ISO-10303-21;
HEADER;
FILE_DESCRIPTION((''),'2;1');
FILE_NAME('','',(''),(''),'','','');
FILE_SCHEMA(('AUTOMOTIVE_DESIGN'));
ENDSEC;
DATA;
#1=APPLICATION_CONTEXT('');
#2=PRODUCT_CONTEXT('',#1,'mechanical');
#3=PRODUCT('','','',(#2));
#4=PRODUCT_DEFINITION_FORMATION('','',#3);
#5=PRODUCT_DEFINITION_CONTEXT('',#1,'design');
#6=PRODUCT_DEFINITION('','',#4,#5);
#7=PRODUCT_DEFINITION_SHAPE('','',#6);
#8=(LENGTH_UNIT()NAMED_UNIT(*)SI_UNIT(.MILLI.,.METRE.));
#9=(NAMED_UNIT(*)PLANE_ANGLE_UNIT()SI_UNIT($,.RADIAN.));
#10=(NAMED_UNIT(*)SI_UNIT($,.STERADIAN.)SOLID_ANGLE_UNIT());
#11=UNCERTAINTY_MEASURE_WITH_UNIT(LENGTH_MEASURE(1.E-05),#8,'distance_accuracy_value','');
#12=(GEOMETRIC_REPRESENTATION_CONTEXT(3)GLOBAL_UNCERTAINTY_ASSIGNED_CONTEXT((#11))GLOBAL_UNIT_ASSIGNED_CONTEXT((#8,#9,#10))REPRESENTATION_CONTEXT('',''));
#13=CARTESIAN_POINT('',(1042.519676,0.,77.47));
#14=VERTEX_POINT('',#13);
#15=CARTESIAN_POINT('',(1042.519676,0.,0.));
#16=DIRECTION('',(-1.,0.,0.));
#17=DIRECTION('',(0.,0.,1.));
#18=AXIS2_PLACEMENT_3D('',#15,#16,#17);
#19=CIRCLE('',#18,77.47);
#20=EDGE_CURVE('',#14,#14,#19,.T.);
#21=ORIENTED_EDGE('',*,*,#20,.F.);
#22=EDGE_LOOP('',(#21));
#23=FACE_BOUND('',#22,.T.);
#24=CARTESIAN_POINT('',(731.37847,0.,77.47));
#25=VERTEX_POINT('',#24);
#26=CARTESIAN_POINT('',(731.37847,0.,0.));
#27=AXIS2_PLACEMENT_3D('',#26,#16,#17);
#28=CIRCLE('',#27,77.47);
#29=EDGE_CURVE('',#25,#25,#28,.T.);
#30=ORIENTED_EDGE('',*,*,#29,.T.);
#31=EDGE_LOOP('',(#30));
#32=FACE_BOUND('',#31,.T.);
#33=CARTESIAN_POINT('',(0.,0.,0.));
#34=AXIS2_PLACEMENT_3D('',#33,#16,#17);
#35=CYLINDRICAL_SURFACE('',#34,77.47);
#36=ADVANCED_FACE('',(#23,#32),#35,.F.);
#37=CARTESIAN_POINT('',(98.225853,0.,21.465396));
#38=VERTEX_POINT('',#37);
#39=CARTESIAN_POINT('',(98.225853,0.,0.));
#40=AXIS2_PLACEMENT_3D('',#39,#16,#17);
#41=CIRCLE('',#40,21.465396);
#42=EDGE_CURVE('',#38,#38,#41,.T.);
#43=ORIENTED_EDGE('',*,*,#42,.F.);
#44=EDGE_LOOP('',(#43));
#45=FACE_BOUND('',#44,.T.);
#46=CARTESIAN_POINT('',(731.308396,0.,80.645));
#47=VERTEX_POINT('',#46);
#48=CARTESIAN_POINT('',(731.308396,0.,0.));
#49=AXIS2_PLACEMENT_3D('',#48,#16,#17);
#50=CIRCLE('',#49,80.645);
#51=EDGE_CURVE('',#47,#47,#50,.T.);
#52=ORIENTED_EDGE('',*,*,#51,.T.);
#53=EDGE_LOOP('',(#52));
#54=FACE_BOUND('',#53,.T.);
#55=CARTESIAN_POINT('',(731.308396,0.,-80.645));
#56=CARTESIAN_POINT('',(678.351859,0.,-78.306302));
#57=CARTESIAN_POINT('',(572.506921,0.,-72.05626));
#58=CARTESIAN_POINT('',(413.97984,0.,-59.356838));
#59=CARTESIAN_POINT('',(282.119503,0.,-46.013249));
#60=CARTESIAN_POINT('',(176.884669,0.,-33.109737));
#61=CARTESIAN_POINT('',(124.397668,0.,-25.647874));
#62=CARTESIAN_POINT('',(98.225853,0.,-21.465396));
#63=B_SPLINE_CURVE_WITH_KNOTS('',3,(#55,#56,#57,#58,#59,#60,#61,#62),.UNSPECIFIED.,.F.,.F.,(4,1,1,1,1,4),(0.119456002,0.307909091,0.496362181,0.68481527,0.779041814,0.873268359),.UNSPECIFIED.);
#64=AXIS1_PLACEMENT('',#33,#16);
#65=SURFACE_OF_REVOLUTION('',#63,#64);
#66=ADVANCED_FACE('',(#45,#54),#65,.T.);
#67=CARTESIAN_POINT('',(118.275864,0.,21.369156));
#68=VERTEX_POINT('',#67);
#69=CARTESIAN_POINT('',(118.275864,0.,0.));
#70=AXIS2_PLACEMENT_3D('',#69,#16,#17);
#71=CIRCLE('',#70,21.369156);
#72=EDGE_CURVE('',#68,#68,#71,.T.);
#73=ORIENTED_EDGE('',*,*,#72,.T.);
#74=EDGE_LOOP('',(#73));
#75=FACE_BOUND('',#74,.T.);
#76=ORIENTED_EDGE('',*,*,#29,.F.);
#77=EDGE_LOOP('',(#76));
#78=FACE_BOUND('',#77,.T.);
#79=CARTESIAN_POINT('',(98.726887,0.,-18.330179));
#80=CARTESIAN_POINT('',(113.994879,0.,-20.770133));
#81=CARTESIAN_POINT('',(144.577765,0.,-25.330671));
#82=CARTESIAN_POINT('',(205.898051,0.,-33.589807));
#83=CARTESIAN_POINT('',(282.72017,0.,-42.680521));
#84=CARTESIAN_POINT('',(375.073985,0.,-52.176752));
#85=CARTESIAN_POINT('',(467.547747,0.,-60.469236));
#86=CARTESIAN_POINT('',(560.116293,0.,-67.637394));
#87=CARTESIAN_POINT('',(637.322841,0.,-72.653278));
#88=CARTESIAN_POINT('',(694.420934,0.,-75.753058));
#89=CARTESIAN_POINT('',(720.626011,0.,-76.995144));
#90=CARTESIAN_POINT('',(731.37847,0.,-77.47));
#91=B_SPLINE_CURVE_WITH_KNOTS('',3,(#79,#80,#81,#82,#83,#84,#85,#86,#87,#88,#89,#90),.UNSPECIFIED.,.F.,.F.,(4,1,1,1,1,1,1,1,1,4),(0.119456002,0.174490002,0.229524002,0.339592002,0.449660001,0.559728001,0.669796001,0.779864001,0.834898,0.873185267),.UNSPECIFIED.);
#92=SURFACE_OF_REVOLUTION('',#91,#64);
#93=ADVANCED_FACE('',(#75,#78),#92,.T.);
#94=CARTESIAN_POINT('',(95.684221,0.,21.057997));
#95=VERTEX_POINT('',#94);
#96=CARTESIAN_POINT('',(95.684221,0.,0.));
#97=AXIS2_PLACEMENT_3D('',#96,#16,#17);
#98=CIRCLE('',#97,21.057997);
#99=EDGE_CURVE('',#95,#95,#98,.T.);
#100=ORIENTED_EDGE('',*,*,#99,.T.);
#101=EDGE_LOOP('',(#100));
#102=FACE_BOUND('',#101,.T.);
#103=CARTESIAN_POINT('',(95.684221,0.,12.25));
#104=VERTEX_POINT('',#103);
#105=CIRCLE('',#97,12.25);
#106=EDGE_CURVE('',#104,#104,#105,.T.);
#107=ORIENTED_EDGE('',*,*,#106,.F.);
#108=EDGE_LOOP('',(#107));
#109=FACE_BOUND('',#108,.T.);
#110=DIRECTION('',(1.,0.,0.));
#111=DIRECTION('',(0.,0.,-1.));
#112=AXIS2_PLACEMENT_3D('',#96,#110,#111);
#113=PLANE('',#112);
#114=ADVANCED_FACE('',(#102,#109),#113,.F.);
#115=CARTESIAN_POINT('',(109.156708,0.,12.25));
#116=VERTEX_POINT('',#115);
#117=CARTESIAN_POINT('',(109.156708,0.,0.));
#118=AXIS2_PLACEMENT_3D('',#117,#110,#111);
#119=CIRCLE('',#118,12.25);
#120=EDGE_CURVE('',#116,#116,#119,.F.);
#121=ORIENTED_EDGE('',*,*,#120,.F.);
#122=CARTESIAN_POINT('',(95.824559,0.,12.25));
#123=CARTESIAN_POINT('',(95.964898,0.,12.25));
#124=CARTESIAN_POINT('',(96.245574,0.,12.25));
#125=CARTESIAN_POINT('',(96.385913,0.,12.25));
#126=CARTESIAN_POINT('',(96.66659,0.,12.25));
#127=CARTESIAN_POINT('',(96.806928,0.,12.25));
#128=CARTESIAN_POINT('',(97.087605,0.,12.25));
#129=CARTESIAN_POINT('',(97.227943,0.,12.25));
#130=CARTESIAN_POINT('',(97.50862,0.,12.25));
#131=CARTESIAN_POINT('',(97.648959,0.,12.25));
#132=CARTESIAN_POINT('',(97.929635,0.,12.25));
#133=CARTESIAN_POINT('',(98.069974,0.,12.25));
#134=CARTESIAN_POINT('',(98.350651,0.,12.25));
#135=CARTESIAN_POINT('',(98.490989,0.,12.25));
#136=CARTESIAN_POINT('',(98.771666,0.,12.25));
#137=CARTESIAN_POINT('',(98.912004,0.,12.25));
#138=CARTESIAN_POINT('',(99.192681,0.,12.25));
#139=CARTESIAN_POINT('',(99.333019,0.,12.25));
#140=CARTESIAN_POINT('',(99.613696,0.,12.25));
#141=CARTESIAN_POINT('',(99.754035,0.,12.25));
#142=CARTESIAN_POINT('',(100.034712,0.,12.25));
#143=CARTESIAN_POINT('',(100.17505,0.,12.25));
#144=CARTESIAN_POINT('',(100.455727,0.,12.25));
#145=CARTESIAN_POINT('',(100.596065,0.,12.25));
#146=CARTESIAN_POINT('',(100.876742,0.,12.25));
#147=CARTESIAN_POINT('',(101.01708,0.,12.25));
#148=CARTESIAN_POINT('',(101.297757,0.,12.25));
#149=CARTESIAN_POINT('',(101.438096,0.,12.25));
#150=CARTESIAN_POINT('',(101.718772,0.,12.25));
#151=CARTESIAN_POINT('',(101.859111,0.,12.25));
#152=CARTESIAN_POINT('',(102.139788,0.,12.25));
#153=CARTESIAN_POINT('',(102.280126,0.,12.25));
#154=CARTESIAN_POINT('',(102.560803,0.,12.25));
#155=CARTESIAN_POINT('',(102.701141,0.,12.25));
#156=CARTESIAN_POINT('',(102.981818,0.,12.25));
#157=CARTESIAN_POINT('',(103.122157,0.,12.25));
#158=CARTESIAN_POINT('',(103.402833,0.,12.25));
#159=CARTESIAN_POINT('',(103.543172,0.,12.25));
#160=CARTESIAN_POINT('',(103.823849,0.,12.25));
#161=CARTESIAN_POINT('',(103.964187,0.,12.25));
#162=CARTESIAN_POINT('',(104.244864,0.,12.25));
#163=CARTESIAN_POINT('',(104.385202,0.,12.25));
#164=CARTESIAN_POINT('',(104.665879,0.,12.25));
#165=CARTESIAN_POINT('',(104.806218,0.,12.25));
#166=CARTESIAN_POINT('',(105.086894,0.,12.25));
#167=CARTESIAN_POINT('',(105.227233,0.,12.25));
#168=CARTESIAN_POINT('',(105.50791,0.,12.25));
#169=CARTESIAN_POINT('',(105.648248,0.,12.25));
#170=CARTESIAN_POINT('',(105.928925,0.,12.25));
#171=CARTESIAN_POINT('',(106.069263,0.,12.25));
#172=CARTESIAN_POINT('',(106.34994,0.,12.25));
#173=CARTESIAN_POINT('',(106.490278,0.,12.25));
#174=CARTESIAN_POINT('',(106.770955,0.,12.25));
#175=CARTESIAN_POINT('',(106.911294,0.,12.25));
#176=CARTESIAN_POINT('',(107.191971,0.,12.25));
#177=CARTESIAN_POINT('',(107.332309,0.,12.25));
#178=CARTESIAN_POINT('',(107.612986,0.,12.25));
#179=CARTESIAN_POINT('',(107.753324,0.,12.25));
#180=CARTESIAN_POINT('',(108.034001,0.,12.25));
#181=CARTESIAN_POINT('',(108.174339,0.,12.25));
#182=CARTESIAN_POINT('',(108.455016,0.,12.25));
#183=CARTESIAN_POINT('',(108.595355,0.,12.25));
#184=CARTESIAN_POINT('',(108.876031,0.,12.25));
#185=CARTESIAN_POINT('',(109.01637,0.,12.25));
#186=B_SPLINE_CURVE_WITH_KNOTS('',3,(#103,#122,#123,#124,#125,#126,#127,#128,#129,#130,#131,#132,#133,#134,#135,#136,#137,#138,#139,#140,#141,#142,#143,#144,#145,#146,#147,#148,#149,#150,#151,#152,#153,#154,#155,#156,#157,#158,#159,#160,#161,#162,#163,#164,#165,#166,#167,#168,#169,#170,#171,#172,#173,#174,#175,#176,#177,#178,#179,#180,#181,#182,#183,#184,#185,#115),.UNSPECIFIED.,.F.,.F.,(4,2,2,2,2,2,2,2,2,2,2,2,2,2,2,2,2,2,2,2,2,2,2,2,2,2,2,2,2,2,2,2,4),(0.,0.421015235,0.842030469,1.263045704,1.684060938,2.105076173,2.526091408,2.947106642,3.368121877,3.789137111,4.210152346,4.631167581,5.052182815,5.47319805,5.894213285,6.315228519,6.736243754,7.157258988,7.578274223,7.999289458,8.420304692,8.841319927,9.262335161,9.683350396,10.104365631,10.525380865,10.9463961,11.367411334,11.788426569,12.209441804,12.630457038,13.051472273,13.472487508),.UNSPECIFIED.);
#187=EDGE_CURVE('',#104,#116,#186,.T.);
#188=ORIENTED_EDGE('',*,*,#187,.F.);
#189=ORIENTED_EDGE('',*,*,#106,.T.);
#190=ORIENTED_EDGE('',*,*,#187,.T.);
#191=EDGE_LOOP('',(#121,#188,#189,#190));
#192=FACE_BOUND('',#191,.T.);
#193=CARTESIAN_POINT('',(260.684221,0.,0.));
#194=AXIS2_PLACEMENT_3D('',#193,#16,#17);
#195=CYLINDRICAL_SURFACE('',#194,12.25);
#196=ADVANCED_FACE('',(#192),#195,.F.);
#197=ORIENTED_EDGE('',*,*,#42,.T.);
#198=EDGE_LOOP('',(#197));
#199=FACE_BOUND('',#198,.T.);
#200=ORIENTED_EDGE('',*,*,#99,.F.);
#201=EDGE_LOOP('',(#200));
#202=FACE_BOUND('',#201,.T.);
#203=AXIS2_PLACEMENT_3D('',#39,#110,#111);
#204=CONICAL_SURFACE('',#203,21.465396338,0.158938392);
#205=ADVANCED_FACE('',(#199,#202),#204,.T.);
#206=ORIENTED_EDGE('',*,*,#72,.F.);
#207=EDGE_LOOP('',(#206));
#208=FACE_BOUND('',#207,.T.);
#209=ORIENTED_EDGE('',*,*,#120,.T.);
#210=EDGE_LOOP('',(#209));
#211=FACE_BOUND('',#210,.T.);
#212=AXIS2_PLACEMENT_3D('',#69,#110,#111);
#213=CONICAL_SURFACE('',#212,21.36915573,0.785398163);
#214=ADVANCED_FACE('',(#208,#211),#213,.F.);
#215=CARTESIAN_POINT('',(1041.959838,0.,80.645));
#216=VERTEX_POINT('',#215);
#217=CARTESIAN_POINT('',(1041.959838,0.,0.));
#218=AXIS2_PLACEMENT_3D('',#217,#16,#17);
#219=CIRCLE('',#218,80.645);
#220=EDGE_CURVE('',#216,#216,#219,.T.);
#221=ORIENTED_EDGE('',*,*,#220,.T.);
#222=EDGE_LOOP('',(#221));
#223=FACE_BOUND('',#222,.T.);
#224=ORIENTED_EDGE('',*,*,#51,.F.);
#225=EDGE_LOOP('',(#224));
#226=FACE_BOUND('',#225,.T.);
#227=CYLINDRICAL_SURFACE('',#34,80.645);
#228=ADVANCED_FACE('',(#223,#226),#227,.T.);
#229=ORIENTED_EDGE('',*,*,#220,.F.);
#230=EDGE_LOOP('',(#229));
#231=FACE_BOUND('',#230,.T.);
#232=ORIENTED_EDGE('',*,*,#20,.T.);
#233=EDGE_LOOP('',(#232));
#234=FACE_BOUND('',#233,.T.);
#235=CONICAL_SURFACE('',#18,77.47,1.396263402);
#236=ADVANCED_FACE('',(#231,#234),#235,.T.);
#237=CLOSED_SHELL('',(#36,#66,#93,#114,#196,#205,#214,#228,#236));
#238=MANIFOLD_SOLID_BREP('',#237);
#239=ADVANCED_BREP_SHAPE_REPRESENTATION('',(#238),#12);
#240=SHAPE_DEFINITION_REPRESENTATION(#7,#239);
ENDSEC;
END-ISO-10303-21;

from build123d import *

# Parameters (mm, degrees)
CHAMFER1_SIZE      = 16.51
SKETCH2_R          = 12.25
CUT_EXTRUDE1_DEPTH = 165


with BuildPart() as part:
    # Sketch1 → Revolve5 (revolve)
    with BuildSketch(Plane(origin=(0, 0, 0), x_dir=(1, 0, 0), z_dir=(0, 1, 0)), mode=Mode.PRIVATE) as revolve5_sk:
        with BuildLine():
            Line((98.225852671, 21.465396338), (95.684220755, 21.057997163))
            Line((95.684220755, 21.057997163), (95.684220755, 0))
            Line((95.684220755, 0), (98.726886962, 0))
            Line((98.726886962, 0), (98.726886962, 18.330178699))
            add(Edge.make_bspline(
                [(98.726886962, 18.330178699), (113.994878644, 20.770132881), (144.577764754, 25.330670583), (205.898051252, 33.589807316), (282.72017046, 42.680521232), (375.073984944, 52.176751592), (467.547747058, 60.469235877), (560.11629344, 67.637393605), (637.322841402, 72.653277734), (694.420933949, 75.753057643), (720.626011218, 76.995143626), (731.378470364, 77.47)],
                knots=[0.119456002, 0.119456002, 0.119456002, 0.119456002, 0.174490002, 0.229524002, 0.339592002, 0.449660001, 0.559728001, 0.669796001, 0.779864001, 0.834898, 0.873185267, 0.873185267, 0.873185267, 0.873185267], degree=3))
            Line((731.378470364, 77.47), (1042.519676327, 77.47))
            Line((1042.519676327, 77.47), (1041.959838164, 80.645))
            Line((1041.959838164, 80.645), (731.308396413, 80.645))
            add(Edge.make_bspline(
                [(98.225852671, 21.465396338), (124.397667511, 25.647873666), (176.884669485, 33.109736653), (282.119502984, 46.013248572), (413.979840243, 59.356838077), (572.506921448, 72.05625987), (678.351858694, 78.306302486), (731.308396413, 80.645)],
                knots=[0.119456002, 0.119456002, 0.119456002, 0.119456002, 0.213682547, 0.307909091, 0.496362181, 0.68481527, 0.873268359, 0.873268359, 0.873268359, 0.873268359], degree=3))
        make_face()
    revolve(revolve5_sk.sketch.rotate(Axis((0, 0, 0), (1, 0, 0)), 180), axis=Axis((0, 0, 0), (1, 0, 0)))

    # Chamfer1
    # the kernel refuses this chamfer: 19.899620903, 16.51 mm, written as the material it adds along each edge
    with BuildSketch(Plane(origin=(98.726886962, 0, 0), x_dir=(0, 0, 1), z_dir=(0, 1, 0))) as chamfer1_piece_1:
        with BuildLine():
            Line((18.330178699 - CHAMFER1_SIZE, 0), (21.36915573, 19.548977031))
            ThreePointArc((21.36915573, 19.548977031), (19.91924557, 10.088803652), (18.330178699, 0))
            Line((18.330178699, 0), (18.330178699 - CHAMFER1_SIZE, 0))
        make_face()
    revolve(axis=Axis((98.726886962, 0, 0), (1, 0, 0)))

    # Sketch2 → Cut-Extrude1 (cut)
    with BuildSketch(Plane.ZY.offset(-95.684220755)):
        Circle(SKETCH2_R)
    extrude(amount=-CUT_EXTRUDE1_DEPTH, mode=Mode.SUBTRACT)


solid = part.part
